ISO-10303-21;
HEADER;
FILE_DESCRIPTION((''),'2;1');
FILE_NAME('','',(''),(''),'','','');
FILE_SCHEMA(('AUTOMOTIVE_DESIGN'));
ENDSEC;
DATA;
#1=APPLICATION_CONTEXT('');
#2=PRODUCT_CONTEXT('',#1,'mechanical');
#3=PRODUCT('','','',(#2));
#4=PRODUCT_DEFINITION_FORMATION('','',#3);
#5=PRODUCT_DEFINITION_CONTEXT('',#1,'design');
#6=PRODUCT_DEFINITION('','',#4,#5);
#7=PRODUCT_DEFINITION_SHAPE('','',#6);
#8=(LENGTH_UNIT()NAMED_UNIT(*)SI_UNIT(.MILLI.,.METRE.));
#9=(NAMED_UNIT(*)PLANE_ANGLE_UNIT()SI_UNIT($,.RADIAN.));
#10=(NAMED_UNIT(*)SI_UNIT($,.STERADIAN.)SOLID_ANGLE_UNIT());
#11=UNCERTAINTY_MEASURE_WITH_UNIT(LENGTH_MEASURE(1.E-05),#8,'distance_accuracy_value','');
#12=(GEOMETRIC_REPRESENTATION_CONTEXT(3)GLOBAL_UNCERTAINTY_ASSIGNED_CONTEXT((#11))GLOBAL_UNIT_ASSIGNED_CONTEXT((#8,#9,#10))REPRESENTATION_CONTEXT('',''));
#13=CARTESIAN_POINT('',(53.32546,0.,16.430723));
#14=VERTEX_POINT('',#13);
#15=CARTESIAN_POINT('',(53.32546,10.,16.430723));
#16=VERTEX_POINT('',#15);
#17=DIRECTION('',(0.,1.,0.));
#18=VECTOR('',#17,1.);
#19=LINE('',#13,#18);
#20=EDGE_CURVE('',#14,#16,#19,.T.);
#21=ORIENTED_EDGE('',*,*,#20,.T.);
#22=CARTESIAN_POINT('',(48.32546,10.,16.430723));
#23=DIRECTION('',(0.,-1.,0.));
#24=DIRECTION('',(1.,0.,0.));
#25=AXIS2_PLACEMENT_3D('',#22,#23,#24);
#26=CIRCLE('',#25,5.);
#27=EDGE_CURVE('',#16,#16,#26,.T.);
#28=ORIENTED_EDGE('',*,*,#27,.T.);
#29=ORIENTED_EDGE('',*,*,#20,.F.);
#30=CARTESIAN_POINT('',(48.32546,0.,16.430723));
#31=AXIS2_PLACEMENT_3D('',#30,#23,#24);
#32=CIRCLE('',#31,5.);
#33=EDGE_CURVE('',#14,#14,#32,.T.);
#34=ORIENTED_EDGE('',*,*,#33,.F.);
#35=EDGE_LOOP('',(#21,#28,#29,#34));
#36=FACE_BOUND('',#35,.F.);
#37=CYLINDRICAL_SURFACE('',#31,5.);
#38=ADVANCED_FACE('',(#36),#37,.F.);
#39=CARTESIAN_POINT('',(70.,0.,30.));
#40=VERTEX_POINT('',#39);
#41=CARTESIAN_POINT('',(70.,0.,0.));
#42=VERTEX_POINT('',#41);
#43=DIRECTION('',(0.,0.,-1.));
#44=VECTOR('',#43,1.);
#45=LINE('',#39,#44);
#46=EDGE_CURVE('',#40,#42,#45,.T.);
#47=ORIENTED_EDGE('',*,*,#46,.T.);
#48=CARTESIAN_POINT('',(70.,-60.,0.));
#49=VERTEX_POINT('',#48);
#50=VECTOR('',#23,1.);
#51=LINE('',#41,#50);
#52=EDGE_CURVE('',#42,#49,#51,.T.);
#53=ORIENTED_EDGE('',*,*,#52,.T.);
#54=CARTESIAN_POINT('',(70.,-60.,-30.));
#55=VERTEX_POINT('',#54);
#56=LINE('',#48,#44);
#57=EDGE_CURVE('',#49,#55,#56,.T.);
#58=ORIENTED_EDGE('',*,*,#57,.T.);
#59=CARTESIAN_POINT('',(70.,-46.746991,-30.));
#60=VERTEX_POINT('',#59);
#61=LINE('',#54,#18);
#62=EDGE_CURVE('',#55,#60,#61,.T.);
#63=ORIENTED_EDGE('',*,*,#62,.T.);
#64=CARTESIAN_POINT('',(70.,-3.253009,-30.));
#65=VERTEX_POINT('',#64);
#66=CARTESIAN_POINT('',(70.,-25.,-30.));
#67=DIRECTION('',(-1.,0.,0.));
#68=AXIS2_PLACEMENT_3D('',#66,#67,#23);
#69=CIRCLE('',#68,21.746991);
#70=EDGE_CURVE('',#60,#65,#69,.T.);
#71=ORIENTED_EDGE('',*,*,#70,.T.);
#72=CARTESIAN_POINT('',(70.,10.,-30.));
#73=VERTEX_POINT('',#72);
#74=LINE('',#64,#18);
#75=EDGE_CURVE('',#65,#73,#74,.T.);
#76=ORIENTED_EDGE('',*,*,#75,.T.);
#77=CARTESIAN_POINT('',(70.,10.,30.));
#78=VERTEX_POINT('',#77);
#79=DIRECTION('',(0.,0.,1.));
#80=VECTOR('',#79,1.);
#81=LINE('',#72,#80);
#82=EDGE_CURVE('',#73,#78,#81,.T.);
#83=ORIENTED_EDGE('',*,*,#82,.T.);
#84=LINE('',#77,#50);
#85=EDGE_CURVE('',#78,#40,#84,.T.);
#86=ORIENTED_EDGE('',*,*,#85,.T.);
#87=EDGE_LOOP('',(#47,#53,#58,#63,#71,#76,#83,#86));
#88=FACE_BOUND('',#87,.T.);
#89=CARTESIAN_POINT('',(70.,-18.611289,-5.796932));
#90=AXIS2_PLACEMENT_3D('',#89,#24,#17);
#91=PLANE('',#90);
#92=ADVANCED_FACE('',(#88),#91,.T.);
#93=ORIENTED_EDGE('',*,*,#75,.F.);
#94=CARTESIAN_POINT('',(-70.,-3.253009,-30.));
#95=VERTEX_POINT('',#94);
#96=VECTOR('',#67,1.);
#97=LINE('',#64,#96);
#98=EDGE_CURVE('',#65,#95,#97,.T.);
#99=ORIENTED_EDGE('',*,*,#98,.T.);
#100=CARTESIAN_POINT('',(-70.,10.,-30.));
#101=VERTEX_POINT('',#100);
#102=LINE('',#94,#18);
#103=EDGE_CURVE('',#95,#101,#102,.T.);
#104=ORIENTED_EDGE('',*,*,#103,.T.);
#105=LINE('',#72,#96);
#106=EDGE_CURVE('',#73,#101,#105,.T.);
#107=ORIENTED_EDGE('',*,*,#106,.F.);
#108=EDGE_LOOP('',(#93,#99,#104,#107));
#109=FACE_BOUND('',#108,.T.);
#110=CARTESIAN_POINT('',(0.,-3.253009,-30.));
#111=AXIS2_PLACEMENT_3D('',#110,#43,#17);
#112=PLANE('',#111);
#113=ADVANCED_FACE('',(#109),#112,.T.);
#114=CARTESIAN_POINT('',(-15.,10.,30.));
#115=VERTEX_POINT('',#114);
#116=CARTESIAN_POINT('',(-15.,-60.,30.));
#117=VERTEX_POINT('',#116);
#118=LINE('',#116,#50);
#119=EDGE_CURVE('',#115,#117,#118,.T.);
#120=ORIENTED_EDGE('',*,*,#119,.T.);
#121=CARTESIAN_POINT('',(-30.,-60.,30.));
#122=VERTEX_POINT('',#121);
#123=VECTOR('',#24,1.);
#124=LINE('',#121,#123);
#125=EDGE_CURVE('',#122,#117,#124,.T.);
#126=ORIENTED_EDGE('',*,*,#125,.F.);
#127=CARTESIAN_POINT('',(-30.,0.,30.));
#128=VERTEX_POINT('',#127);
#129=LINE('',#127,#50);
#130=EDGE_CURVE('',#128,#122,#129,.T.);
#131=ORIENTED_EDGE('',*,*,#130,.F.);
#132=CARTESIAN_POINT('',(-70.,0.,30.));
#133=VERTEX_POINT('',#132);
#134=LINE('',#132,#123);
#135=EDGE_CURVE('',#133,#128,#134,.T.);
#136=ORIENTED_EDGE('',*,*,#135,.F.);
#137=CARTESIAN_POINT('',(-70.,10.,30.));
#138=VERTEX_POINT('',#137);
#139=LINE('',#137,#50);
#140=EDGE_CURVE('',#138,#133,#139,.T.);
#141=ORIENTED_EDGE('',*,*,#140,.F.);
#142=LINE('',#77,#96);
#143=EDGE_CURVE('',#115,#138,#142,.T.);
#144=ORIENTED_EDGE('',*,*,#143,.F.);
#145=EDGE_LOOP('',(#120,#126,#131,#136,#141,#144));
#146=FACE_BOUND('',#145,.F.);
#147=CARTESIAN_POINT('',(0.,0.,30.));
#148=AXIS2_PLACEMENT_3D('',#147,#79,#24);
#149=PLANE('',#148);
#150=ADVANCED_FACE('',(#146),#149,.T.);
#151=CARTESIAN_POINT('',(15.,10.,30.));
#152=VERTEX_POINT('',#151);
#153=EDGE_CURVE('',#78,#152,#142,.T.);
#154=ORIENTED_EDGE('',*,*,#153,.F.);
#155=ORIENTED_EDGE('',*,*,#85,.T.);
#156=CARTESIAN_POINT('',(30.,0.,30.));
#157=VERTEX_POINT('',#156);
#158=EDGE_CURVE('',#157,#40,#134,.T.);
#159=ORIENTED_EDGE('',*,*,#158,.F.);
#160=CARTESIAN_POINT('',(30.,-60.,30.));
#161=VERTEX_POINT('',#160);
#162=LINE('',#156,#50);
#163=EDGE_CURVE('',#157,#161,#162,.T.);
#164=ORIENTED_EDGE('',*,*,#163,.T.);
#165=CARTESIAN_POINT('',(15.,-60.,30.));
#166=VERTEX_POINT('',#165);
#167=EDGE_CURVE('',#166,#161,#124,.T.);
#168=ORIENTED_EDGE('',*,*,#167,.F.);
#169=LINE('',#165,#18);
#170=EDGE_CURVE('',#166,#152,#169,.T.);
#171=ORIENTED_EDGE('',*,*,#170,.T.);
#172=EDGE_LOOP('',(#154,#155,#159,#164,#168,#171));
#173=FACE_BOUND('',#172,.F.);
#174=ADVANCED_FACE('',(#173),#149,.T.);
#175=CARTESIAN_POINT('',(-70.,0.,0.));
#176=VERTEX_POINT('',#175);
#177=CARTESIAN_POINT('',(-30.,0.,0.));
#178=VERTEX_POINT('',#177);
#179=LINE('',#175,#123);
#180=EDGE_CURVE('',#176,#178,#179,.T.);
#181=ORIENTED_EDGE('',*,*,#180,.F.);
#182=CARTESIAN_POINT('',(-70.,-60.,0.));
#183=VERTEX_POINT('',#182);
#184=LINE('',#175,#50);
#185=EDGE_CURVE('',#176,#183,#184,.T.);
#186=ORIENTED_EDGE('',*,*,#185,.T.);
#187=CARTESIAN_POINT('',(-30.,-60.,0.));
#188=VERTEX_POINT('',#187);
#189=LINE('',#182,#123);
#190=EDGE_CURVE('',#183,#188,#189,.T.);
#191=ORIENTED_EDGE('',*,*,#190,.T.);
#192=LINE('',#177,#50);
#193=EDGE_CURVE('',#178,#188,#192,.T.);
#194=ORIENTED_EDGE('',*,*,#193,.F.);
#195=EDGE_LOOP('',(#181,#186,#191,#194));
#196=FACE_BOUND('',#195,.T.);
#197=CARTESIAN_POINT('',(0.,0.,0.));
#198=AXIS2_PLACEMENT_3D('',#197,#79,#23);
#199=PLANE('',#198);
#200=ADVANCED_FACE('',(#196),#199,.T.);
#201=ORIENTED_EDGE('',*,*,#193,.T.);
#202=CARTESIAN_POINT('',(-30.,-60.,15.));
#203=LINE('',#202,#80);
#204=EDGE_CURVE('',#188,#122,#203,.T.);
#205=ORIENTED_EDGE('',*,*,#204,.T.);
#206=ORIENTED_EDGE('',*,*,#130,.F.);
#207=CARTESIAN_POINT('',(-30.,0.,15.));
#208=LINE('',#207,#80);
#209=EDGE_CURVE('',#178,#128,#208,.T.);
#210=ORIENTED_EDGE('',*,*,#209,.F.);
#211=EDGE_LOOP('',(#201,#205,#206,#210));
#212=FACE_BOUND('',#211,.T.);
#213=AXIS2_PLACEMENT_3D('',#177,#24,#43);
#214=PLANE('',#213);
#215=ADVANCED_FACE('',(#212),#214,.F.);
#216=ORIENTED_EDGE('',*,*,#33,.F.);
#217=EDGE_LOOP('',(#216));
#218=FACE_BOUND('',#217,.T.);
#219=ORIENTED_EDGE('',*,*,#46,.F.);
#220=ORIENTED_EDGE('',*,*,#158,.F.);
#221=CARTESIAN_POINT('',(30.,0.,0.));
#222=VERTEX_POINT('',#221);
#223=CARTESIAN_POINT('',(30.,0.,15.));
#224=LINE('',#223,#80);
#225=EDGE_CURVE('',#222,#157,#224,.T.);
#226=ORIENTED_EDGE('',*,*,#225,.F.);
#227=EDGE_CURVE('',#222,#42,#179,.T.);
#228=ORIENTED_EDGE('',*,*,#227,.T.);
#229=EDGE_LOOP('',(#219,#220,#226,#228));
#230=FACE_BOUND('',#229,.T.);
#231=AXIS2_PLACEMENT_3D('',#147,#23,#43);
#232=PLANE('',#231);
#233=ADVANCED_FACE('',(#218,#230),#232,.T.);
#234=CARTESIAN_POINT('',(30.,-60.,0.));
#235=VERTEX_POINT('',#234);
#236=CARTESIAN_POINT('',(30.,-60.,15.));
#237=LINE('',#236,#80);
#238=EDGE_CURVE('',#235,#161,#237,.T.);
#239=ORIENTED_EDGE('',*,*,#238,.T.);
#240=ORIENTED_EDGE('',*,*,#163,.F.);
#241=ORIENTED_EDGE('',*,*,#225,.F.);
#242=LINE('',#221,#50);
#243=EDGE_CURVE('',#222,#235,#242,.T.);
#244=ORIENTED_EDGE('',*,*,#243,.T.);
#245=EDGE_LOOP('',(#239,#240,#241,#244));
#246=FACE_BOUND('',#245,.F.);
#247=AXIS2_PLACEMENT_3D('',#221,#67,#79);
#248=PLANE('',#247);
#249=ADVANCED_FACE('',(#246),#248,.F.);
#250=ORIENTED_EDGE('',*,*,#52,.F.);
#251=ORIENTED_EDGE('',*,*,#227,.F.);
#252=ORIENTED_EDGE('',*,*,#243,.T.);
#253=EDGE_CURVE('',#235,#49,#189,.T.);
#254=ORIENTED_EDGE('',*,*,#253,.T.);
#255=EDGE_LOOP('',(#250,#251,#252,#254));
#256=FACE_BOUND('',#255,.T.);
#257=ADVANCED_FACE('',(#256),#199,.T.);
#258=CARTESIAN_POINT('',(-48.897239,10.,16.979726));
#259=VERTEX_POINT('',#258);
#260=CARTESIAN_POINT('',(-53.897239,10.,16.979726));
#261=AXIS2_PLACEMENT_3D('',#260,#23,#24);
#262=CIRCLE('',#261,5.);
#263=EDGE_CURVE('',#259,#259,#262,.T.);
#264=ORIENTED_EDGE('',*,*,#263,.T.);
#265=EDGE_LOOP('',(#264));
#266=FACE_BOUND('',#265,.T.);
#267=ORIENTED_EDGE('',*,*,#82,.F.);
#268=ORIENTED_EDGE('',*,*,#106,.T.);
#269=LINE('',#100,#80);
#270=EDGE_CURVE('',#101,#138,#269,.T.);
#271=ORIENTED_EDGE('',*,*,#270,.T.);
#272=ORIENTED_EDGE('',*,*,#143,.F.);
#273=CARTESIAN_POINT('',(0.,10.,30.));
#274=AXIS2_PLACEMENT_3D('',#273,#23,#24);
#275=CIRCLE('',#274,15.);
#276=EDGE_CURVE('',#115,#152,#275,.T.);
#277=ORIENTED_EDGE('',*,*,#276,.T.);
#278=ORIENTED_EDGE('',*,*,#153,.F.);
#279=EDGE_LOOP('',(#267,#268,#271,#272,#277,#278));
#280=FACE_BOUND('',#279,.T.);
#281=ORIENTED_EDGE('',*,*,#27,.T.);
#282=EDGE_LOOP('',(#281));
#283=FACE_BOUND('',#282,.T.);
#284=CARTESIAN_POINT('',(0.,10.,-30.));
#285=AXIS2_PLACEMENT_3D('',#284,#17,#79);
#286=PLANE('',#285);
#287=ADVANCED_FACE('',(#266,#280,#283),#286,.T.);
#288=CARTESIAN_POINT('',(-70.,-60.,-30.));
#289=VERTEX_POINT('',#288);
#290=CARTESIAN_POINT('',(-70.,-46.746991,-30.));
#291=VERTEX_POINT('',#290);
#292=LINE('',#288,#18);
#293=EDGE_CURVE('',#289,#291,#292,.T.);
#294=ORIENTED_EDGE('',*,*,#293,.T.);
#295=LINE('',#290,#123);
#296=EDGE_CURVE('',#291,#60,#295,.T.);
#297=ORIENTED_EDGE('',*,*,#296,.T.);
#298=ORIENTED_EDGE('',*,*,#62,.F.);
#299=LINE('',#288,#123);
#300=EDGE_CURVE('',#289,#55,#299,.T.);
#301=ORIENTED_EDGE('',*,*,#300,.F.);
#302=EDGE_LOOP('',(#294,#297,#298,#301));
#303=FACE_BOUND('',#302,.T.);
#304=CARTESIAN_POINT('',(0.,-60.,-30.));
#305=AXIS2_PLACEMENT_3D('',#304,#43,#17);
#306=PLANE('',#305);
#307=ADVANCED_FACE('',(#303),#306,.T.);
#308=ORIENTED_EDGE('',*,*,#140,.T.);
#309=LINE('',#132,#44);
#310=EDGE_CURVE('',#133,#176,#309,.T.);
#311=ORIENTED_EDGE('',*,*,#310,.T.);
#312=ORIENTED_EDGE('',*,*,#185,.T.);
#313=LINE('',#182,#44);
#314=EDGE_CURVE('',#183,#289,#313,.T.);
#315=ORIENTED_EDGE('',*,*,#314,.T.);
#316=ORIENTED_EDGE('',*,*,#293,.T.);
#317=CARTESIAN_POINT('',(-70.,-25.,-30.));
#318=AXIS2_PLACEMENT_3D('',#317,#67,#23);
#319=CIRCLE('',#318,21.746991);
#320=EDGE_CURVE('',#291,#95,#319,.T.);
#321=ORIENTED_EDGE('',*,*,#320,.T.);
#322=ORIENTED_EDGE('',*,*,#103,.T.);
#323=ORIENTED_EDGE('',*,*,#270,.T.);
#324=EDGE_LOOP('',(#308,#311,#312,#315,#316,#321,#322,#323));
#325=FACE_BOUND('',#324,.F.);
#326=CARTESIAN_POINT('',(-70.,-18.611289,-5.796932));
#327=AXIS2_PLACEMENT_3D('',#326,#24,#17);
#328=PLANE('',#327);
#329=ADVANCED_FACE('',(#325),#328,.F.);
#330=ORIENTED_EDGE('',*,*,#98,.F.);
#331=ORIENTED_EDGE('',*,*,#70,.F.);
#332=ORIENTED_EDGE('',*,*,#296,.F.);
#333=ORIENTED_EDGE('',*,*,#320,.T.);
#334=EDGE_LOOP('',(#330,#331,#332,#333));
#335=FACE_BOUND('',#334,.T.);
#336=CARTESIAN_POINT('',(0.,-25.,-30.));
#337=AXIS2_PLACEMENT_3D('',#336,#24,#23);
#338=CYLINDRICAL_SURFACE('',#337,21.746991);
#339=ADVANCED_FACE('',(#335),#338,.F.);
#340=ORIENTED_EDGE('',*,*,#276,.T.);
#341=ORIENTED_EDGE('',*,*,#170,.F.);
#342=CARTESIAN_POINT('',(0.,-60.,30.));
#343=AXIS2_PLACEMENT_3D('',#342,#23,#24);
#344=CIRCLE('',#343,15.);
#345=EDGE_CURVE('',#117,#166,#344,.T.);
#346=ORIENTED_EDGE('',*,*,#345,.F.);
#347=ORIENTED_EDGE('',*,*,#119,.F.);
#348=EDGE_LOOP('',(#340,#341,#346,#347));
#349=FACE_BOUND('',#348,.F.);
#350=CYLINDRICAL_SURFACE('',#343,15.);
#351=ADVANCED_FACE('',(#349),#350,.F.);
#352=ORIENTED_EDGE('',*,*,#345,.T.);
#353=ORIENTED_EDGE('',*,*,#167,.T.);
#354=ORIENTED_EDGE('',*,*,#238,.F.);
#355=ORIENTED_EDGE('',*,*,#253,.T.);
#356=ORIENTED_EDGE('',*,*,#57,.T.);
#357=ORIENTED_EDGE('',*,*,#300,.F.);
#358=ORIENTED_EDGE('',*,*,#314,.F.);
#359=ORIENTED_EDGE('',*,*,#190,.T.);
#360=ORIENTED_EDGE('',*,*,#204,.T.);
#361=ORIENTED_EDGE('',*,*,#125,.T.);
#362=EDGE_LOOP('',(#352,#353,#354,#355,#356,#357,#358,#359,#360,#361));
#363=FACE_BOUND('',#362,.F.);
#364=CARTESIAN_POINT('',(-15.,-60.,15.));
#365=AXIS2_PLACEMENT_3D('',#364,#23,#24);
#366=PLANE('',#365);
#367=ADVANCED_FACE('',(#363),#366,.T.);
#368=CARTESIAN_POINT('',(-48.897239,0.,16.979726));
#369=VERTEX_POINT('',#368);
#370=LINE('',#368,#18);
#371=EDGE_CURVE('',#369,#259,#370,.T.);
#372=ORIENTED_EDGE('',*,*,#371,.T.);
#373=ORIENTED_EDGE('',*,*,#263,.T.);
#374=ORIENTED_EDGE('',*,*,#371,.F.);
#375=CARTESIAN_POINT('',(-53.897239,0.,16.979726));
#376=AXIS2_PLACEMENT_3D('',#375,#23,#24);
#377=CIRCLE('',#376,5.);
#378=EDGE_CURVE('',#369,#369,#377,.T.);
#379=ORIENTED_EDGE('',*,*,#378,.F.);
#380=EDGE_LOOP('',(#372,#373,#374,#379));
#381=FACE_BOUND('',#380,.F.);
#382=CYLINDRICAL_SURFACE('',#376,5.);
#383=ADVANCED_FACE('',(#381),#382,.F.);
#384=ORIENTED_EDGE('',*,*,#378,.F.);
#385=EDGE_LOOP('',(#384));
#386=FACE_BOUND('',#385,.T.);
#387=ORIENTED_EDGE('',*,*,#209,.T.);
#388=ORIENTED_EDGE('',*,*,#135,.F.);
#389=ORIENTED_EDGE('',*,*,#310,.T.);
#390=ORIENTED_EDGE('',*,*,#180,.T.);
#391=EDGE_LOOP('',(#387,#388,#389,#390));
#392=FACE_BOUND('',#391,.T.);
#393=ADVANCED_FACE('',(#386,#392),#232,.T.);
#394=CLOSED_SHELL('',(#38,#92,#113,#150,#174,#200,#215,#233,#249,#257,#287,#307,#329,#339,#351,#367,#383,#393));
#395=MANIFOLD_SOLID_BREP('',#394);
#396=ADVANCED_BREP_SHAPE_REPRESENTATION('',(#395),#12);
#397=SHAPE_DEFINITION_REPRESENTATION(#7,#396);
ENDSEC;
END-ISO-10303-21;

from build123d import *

# Parameters (mm, degrees)
F1_DEPTH = 70
F2_W     = 30
F2_H     = 30
F3_DEPTH = 60
F4_R     = 15
F5_DEPTH = 72.5
F6_R     = 5
F7_DEPTH = 37.8
F8_R     = 5
F9_DEPTH = 25


# Not quite as in the source:
# - a pattern or mirror of a feature is missing from the dataset's text; its kind, count and spacing are read off the source's solid


with BuildPart() as f1:
    # F0 (on Right) → F1 (new body, symmetric)
    with BuildSketch(Plane.YZ):
        with BuildLine():
            Line((10, 30), (0, 30))
            Line((0, 30), (0, 0))
            Line((0, 0), (-60, 0))
            Line((-60, 0), (-60, -30))
            Line((-60, -30), (-46.7469906007, -30))
            ThreePointArc((-46.7469906007, -30), (-25, -8.2530093993), (-3.2530093993, -30))
            Line((-3.2530093993, -30), (10, -30))
            Line((10, -30), (10, 30))
        make_face()
    extrude(amount=F1_DEPTH, both=True)

    # F2 (on face) → F3 (join, through all)
    with BuildSketch(Plane.XZ):
        with Locations((15, 15)):
            Rectangle(F2_W, F2_H)
    f3 = extrude(amount=F3_DEPTH)

    # F3_copies: F3 across plane
    add(f3.mirror(Plane(origin=(0, 0, 0), x_dir=(0, 0, -1), z_dir=(-1, 0, 0))))

    # F4 (on face) → F5 (cut)
    with BuildSketch(Plane.XZ.offset(60)):
        with Locations((0, 30)):
            Circle(F4_R)
    extrude(amount=-F5_DEPTH, mode=Mode.SUBTRACT)

    # F6 (on face) → F7 (cut)
    with BuildSketch(Plane.XZ):
        with Locations((48.3254604042, 16.4307225496)):
            Circle(F6_R)
    extrude(amount=-F7_DEPTH, mode=Mode.SUBTRACT)

    # F8 (on face) → F9 (cut)
    with BuildSketch(Plane.XZ):
        with Locations((-53.8972392678, 16.9797260314)):
            Circle(F8_R)
    extrude(amount=-F9_DEPTH, mode=Mode.SUBTRACT)


solid = f1.part
